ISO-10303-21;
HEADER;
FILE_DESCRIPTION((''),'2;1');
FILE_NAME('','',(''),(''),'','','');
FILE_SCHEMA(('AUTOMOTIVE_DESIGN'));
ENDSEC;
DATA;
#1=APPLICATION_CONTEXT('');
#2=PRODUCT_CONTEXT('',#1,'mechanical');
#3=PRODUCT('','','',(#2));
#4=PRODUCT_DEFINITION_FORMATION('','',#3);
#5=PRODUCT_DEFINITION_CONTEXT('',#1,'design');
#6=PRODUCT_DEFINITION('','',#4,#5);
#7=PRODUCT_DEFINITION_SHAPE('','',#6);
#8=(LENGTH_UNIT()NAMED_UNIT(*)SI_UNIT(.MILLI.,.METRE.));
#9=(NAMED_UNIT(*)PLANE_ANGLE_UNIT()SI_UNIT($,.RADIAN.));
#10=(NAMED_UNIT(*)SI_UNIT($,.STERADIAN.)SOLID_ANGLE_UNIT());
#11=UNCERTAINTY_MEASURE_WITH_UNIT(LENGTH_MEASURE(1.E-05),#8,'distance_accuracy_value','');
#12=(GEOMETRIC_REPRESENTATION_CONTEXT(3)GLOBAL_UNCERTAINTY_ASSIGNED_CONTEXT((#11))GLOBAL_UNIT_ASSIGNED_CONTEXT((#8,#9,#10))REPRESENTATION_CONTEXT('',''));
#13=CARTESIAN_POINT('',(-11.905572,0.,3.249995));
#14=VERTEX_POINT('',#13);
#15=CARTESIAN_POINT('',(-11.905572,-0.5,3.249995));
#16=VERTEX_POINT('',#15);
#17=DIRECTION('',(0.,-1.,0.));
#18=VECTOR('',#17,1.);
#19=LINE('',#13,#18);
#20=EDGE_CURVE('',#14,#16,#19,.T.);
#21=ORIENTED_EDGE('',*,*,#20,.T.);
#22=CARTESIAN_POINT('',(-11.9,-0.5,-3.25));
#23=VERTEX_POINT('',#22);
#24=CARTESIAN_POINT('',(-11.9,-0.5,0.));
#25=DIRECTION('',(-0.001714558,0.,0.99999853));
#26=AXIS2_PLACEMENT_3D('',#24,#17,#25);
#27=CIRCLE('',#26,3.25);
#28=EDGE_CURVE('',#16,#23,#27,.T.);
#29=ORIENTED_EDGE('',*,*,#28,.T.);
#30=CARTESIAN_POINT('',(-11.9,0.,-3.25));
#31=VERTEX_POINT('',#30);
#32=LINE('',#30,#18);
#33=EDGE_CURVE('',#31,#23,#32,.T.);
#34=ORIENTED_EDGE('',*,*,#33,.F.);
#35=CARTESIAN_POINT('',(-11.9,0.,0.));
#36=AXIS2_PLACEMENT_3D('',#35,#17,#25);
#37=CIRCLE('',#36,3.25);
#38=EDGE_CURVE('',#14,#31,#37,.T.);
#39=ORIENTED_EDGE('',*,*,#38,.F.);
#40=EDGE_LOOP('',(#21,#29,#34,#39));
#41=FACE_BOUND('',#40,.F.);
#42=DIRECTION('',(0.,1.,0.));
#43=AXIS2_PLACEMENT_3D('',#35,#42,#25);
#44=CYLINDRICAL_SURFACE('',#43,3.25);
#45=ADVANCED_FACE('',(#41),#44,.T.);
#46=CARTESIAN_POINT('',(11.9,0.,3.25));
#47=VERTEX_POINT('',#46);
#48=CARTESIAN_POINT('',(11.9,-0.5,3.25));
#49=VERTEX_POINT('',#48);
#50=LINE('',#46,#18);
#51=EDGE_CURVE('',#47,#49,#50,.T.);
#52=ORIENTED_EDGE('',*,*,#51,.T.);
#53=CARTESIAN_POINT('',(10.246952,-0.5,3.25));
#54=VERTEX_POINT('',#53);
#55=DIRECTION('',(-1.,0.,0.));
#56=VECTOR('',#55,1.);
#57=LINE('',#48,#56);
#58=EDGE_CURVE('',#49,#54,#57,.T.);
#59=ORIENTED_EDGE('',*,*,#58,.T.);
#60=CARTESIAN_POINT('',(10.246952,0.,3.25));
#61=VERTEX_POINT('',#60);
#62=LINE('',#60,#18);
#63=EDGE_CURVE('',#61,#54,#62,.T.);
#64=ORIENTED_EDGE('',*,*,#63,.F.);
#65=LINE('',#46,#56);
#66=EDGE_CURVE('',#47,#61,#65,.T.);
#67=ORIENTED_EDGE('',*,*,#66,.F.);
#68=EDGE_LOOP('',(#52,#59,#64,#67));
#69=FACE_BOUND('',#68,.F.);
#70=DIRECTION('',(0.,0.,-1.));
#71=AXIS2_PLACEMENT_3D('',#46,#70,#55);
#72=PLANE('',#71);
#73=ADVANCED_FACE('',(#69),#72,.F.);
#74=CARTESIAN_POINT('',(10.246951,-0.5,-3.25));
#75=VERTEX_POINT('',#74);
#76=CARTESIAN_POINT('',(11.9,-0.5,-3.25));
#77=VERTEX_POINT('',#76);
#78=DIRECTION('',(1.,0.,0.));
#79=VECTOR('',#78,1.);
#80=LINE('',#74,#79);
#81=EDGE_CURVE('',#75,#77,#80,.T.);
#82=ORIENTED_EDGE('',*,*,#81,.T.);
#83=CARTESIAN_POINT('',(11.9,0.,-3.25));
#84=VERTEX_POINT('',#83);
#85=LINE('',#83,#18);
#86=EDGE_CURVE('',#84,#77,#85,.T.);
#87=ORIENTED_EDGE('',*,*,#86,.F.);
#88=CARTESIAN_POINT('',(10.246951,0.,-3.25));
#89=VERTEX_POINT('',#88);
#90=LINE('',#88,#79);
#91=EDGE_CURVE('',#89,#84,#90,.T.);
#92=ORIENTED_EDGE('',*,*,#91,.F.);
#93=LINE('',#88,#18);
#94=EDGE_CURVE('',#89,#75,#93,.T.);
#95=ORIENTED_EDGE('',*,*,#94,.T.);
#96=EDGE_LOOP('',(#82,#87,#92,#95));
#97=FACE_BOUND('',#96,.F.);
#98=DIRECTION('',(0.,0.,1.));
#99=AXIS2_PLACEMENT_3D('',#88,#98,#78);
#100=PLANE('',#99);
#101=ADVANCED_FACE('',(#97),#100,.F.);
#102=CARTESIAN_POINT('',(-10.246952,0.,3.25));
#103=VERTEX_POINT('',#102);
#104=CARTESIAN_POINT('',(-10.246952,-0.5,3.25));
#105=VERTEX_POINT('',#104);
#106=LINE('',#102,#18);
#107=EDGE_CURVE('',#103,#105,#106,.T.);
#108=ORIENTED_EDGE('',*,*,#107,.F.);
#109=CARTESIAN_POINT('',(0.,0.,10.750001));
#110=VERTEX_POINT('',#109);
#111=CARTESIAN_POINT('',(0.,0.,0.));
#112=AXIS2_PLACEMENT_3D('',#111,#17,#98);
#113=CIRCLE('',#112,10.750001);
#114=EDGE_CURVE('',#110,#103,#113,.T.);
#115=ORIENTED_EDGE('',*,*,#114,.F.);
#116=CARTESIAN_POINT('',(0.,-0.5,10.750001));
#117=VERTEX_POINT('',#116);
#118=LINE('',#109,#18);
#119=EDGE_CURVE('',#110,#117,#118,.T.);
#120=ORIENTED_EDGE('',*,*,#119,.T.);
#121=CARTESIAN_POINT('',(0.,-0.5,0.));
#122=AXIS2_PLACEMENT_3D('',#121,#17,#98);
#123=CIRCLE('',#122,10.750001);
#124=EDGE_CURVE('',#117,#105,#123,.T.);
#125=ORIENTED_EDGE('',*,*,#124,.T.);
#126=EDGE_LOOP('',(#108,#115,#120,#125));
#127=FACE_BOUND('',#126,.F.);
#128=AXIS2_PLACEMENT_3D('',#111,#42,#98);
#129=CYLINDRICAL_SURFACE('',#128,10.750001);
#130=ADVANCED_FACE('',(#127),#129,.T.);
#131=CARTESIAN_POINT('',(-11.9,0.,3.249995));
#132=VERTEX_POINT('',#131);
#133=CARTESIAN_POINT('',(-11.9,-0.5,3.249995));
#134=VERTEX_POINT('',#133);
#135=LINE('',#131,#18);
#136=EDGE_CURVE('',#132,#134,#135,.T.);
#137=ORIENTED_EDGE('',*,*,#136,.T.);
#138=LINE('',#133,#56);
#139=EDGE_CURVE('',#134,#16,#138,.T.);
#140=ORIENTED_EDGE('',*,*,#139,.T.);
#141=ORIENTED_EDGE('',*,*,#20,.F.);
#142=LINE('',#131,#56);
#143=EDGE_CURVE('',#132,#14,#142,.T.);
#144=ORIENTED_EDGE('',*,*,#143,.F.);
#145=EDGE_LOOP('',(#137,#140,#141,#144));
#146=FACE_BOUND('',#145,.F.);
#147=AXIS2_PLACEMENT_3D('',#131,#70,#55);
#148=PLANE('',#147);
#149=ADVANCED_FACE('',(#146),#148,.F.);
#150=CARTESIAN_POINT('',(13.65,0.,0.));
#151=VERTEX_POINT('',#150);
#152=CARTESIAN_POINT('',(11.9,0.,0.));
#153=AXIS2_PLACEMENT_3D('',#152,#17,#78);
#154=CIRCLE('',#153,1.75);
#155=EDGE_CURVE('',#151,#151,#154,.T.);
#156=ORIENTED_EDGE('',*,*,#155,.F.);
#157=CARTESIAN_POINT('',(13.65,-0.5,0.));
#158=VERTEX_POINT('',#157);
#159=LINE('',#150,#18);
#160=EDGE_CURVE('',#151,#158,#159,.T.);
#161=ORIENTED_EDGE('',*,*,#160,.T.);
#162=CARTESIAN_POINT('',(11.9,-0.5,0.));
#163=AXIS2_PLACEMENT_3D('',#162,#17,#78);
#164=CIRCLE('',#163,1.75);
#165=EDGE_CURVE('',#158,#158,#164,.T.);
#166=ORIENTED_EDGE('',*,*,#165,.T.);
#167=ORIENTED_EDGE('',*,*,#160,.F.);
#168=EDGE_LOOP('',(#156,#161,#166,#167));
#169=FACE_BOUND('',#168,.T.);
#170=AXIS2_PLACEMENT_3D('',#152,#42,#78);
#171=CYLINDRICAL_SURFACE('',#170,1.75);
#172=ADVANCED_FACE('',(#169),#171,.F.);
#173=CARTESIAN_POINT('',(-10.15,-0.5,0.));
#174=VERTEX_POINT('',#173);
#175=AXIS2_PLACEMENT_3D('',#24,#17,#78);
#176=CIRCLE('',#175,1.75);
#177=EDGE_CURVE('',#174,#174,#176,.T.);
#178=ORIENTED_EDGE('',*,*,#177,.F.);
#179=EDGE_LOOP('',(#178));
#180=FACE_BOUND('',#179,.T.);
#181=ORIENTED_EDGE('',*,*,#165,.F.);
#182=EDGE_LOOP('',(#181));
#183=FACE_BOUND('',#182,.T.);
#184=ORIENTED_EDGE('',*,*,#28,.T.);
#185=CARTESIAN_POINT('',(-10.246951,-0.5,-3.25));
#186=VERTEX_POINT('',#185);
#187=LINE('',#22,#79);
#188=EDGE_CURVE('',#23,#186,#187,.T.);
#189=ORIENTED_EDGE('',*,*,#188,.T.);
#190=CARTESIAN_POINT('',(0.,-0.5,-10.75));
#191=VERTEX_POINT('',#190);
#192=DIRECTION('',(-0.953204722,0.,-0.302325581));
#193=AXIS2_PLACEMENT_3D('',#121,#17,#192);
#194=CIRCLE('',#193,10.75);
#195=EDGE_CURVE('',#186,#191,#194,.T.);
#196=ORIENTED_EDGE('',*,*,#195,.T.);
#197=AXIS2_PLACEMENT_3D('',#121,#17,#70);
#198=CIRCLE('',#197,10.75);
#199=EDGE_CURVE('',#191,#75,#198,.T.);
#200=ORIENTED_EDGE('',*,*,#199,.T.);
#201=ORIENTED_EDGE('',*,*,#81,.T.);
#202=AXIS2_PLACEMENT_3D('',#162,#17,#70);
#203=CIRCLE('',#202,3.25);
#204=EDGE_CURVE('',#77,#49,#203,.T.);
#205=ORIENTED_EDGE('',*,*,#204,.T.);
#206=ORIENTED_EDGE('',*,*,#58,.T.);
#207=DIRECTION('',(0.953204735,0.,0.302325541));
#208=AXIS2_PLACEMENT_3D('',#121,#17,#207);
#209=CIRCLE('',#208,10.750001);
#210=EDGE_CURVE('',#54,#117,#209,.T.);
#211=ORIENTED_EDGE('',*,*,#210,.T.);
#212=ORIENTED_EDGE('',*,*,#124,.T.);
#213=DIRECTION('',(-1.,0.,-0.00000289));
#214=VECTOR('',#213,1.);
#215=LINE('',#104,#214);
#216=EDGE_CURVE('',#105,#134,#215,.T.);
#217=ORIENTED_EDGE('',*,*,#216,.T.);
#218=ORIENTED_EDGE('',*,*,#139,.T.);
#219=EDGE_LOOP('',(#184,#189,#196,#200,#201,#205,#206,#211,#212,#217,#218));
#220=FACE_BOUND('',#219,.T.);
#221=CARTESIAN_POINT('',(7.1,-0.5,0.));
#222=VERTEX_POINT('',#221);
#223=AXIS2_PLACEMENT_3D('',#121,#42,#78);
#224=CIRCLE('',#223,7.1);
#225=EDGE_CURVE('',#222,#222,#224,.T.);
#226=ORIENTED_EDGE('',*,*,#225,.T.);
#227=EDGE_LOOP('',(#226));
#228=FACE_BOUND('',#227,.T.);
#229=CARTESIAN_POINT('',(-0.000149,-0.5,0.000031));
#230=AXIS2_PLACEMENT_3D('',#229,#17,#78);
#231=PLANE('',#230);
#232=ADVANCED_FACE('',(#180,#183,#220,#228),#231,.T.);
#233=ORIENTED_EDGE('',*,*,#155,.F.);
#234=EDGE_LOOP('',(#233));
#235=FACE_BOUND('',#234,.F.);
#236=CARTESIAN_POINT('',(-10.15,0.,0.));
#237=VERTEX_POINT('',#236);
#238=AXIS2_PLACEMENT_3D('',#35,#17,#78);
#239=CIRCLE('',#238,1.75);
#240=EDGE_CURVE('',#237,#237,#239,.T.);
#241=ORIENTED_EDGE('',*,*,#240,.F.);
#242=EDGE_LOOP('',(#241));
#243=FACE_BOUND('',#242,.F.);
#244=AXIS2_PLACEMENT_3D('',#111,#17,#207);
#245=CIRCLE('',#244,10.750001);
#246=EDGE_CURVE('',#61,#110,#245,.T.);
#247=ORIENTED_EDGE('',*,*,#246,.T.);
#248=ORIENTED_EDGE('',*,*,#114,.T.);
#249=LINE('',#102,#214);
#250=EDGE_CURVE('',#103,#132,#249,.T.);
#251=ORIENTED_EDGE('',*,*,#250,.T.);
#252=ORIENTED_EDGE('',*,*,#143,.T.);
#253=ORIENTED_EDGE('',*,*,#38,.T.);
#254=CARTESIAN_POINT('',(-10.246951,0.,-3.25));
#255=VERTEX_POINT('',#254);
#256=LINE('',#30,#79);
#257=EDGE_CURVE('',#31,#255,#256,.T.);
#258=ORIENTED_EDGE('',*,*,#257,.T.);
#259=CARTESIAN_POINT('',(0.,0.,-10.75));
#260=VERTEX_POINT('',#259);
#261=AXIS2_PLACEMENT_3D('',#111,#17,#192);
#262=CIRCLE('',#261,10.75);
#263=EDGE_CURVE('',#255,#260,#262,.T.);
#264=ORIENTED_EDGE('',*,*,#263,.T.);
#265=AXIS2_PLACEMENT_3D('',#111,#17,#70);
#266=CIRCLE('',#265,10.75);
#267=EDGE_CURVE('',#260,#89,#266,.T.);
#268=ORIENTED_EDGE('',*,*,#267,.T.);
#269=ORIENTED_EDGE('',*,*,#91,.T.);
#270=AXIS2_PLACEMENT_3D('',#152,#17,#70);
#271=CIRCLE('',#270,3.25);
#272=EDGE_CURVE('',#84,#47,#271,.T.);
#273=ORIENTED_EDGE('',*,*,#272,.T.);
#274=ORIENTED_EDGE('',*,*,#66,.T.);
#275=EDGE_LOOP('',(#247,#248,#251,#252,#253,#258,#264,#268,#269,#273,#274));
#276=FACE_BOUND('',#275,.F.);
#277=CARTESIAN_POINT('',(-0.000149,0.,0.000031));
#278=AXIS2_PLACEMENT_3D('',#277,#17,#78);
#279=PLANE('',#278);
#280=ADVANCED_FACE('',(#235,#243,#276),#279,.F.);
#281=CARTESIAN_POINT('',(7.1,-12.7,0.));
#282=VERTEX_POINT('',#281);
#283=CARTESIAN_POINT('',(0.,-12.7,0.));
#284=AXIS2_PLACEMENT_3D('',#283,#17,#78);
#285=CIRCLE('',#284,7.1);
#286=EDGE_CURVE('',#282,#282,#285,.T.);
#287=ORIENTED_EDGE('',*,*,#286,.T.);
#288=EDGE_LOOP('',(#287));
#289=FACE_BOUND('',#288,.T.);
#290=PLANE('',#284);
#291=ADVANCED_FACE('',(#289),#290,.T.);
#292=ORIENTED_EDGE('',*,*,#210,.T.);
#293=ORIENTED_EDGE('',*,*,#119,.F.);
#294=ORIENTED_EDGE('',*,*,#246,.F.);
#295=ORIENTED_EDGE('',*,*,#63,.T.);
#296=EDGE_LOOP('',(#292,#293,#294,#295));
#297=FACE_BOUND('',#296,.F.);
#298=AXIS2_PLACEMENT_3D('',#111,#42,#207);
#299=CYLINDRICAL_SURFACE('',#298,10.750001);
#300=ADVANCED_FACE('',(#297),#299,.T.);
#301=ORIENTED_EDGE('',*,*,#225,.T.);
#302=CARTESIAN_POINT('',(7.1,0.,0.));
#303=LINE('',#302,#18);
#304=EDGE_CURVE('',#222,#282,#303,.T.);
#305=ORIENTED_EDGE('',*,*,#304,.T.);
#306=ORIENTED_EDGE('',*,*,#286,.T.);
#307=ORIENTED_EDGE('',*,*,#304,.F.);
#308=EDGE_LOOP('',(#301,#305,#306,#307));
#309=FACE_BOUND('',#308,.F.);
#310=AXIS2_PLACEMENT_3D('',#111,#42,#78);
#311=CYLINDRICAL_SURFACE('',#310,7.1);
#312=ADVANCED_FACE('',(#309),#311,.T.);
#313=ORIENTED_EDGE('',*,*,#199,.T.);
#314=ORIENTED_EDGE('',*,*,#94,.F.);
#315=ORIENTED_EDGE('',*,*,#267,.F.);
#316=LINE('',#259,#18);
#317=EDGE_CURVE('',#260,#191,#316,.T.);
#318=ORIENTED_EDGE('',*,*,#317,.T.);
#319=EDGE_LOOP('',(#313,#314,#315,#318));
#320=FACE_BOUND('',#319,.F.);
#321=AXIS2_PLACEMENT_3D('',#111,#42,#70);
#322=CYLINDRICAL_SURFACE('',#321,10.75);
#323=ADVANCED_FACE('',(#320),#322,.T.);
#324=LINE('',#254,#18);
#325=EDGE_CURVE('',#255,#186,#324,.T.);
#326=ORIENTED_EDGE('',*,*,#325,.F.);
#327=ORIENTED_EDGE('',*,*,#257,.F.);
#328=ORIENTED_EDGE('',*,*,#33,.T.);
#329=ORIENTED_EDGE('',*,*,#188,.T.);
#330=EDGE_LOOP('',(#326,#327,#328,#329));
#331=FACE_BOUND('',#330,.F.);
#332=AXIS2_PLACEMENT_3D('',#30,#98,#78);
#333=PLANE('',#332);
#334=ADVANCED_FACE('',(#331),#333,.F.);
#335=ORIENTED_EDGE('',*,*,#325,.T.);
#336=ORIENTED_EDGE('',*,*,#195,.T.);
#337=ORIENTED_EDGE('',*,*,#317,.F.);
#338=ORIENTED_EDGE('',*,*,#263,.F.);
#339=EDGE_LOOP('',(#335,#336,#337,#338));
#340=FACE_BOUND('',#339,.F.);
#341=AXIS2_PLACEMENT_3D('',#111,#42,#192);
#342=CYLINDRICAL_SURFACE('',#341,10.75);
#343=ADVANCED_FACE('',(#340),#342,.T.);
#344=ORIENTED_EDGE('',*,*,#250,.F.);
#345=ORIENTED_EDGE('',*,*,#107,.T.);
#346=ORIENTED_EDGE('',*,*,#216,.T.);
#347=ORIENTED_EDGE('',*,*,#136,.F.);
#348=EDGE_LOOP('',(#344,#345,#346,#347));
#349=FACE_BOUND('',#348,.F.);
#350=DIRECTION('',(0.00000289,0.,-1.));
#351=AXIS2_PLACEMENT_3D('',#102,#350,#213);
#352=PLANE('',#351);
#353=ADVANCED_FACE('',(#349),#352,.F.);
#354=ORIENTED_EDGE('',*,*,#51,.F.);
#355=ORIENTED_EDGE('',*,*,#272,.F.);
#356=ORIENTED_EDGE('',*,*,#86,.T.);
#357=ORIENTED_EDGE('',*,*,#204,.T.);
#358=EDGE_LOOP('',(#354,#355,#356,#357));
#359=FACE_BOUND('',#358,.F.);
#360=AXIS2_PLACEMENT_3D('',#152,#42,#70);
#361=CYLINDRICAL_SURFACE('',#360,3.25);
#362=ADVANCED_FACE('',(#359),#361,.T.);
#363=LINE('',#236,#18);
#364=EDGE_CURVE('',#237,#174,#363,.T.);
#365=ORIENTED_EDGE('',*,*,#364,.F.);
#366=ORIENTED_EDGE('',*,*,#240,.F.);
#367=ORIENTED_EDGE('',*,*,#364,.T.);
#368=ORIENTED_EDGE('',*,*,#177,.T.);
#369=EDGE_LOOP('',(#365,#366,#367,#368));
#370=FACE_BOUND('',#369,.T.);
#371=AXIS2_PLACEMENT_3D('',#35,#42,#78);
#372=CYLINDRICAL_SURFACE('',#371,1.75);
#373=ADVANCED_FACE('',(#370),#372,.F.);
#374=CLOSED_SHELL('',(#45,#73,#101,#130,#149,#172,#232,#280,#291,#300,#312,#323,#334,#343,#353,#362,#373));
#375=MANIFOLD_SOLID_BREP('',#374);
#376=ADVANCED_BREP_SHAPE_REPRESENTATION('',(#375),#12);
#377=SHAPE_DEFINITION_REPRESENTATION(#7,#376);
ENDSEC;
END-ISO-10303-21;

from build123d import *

# Parameters (mm, degrees)
F0_R     = 7.1
F1_DEPTH = 12.7
F2_R     = 1.75
F3_DEPTH = 0.5


# Not quite as in the source:
# - ends of sketch curves that miss each other by under 0.0002 mm in the source are joined


with BuildPart() as f1:
    # F0 (on Front) → F1 (new body)
    with BuildSketch(Plane.XZ):
        Circle(F0_R)
    extrude(amount=F1_DEPTH)

    # F2 (on Front) → F3 (join)
    with BuildSketch(Plane.XZ):
        with BuildLine():
            Line((10.246950766, -3.25), (11.9, -3.25))
            ThreePointArc((11.9, -3.25), (15.15, 0), (11.9, 3.25))
            Line((11.9, 3.25), (10.2469522811, 3.25))
            ThreePointArc((10.2469522811, 3.25), (6.3492135874, 8.6746768166), (0, 10.7500014442))
            ThreePointArc((0, 10.7500014442), (-6.3492135874, 8.6746768166), (-10.2469522811, 3.25))
            Line((-10.2469522811, 3.25), (-11.9, 3.249995223))
            Line((-11.9, 3.249995223), (-11.9055723148, 3.249995223))
            ThreePointArc((-11.9055723148, 3.249995223), (-15.1499988057, -0.0027861584), (-11.9, -3.25))
            Line((-11.9, -3.25), (-10.246950766, -3.25))
            ThreePointArc((-10.246950766, -3.25), (-6.3492125496, -8.6746757864), (0, -10.75))
            ThreePointArc((0, -10.75), (6.3492125496, -8.6746757864), (10.246950766, -3.25))
        make_face()
        with Locations((-11.9, 0)):
            Circle(F2_R, mode=Mode.SUBTRACT)
        with Locations((11.9, 0)):
            Circle(F2_R, mode=Mode.SUBTRACT)
    extrude(amount=F3_DEPTH)


solid = f1.part
